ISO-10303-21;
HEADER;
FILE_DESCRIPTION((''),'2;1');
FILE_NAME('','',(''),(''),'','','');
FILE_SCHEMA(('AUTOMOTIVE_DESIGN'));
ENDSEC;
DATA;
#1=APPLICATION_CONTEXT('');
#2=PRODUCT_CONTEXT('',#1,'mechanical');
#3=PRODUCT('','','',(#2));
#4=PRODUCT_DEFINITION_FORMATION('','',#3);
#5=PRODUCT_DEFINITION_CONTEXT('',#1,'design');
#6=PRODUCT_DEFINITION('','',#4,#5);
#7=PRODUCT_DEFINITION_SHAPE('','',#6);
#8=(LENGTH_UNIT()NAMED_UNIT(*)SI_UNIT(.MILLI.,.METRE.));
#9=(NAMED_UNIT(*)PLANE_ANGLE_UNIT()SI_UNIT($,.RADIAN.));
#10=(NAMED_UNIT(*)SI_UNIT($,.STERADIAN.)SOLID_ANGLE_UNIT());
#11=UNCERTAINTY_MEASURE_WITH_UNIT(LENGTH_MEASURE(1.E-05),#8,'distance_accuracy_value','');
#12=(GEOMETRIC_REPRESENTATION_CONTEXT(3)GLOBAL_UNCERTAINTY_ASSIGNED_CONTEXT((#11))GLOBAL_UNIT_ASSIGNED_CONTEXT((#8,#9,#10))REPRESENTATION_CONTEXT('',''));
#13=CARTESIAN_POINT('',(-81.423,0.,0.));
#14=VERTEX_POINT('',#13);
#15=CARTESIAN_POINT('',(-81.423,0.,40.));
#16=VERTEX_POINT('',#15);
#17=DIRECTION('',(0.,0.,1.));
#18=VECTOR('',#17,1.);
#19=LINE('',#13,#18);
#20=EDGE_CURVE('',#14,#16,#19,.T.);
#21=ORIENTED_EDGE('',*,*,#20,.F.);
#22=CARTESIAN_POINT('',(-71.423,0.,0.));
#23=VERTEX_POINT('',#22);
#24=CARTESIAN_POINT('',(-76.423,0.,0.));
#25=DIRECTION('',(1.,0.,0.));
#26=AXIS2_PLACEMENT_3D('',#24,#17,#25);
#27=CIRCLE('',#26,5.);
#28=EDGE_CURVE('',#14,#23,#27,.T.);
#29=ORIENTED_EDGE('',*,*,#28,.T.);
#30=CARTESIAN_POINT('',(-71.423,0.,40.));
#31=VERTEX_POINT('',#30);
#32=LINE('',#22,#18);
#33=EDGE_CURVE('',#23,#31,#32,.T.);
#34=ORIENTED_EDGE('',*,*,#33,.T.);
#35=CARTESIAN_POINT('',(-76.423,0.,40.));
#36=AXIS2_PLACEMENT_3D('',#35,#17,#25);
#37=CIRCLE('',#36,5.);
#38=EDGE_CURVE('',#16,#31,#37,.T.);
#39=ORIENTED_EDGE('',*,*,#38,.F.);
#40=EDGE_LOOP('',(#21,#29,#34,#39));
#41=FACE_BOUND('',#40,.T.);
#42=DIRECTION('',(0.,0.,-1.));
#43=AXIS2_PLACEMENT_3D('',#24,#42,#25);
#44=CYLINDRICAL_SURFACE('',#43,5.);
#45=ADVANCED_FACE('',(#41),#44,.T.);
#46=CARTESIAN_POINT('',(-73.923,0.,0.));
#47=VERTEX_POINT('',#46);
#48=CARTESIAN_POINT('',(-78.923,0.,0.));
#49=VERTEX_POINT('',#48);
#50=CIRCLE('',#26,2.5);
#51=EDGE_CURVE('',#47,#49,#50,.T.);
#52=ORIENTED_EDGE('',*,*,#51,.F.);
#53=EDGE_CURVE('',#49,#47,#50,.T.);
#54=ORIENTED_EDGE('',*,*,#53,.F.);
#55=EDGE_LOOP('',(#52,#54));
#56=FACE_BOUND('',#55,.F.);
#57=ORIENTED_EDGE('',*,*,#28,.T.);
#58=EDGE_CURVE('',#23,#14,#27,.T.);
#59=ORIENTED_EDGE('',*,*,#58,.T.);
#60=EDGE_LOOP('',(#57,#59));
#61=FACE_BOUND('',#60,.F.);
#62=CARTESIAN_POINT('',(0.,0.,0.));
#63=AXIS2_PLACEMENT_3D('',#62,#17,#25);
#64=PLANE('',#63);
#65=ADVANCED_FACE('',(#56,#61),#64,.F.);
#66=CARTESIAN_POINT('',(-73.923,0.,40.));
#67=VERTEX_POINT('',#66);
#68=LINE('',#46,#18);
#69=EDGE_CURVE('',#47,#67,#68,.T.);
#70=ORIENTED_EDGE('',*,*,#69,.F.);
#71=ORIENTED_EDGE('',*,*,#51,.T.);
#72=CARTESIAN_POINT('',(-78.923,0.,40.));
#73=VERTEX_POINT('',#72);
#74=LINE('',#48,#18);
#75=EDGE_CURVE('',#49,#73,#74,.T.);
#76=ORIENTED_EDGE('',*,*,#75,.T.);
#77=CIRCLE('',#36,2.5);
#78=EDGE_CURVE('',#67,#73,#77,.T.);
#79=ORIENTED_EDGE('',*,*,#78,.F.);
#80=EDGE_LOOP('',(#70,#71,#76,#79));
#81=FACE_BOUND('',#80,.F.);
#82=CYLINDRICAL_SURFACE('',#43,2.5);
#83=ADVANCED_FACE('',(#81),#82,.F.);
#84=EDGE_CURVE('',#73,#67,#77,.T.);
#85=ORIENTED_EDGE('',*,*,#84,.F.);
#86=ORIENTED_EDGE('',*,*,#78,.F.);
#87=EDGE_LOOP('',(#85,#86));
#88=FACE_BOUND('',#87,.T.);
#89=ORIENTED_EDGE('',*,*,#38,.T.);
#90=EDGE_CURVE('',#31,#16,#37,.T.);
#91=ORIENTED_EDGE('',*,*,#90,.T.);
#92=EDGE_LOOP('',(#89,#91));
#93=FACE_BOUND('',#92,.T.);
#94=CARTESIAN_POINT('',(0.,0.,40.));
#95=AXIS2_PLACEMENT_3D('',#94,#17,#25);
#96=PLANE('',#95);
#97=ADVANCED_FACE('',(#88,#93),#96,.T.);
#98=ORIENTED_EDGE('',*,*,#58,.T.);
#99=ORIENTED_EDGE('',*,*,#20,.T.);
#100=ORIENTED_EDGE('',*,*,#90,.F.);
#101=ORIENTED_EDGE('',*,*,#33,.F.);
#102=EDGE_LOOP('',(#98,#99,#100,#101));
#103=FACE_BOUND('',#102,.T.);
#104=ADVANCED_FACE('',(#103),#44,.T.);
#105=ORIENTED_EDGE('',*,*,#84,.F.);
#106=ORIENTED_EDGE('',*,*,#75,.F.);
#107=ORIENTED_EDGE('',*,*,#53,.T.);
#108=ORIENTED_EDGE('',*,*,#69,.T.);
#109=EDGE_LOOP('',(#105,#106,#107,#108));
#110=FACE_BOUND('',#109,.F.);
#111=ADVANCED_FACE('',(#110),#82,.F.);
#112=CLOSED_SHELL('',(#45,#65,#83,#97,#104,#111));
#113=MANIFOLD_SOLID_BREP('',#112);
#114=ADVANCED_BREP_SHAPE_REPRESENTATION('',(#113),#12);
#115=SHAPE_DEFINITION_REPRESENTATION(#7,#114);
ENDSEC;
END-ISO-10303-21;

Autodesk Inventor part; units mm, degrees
ref_plane "YZ Plane" through (0, 0, 0) normal (1, 0, 0) x (0, 1, 0)
ref_plane "XZ Plane" through (0, 0, 0) normal (0, 1, 0) x (-1, 0, 0)
ref_plane "XY Plane" through (0, 0, 0) normal (0, 0, 1) x (1, 0, 0)
sketch "Sketch1" plane through (0, 0, 0) normal (0, 0, 1) x (1, 0, 0)
  arc A0 (-98.923, 4.3301) -> (-98.923, -4.3301) centre (-96.423, 0) ccw projected
  arc A1 (93.923, -115.6699) -> (101.423, -111.3397) centre (96.423, -111.3397) ccw projected
  arc A2 (101.423, 111.3397) -> (93.923, 115.6699) centre (96.423, 111.3397) ccw projected
  line L0 (-96.423, 0) -> (-76.423, 0)
  circle A3 centre (-76.423, 0) radius 2.5
  circle A4 centre (-76.423, 0) radius 5
  line L1 (-82.9845, -199.4033) -> (136.5211, 180.7915)
  line L2 (-82.9845, 199.4033) -> (136.5211, -180.7915)
  point P0 (0, 0)
  point P1 (32.141, 0)
  dimension "d0" = 20
  dimension "d1" = 5
  dimension "d2" = 10
extrude "Extrusion1" add sketch "Sketch1" along normal blind 40
properties part number "spacer_etage" material "PET Plastic"
